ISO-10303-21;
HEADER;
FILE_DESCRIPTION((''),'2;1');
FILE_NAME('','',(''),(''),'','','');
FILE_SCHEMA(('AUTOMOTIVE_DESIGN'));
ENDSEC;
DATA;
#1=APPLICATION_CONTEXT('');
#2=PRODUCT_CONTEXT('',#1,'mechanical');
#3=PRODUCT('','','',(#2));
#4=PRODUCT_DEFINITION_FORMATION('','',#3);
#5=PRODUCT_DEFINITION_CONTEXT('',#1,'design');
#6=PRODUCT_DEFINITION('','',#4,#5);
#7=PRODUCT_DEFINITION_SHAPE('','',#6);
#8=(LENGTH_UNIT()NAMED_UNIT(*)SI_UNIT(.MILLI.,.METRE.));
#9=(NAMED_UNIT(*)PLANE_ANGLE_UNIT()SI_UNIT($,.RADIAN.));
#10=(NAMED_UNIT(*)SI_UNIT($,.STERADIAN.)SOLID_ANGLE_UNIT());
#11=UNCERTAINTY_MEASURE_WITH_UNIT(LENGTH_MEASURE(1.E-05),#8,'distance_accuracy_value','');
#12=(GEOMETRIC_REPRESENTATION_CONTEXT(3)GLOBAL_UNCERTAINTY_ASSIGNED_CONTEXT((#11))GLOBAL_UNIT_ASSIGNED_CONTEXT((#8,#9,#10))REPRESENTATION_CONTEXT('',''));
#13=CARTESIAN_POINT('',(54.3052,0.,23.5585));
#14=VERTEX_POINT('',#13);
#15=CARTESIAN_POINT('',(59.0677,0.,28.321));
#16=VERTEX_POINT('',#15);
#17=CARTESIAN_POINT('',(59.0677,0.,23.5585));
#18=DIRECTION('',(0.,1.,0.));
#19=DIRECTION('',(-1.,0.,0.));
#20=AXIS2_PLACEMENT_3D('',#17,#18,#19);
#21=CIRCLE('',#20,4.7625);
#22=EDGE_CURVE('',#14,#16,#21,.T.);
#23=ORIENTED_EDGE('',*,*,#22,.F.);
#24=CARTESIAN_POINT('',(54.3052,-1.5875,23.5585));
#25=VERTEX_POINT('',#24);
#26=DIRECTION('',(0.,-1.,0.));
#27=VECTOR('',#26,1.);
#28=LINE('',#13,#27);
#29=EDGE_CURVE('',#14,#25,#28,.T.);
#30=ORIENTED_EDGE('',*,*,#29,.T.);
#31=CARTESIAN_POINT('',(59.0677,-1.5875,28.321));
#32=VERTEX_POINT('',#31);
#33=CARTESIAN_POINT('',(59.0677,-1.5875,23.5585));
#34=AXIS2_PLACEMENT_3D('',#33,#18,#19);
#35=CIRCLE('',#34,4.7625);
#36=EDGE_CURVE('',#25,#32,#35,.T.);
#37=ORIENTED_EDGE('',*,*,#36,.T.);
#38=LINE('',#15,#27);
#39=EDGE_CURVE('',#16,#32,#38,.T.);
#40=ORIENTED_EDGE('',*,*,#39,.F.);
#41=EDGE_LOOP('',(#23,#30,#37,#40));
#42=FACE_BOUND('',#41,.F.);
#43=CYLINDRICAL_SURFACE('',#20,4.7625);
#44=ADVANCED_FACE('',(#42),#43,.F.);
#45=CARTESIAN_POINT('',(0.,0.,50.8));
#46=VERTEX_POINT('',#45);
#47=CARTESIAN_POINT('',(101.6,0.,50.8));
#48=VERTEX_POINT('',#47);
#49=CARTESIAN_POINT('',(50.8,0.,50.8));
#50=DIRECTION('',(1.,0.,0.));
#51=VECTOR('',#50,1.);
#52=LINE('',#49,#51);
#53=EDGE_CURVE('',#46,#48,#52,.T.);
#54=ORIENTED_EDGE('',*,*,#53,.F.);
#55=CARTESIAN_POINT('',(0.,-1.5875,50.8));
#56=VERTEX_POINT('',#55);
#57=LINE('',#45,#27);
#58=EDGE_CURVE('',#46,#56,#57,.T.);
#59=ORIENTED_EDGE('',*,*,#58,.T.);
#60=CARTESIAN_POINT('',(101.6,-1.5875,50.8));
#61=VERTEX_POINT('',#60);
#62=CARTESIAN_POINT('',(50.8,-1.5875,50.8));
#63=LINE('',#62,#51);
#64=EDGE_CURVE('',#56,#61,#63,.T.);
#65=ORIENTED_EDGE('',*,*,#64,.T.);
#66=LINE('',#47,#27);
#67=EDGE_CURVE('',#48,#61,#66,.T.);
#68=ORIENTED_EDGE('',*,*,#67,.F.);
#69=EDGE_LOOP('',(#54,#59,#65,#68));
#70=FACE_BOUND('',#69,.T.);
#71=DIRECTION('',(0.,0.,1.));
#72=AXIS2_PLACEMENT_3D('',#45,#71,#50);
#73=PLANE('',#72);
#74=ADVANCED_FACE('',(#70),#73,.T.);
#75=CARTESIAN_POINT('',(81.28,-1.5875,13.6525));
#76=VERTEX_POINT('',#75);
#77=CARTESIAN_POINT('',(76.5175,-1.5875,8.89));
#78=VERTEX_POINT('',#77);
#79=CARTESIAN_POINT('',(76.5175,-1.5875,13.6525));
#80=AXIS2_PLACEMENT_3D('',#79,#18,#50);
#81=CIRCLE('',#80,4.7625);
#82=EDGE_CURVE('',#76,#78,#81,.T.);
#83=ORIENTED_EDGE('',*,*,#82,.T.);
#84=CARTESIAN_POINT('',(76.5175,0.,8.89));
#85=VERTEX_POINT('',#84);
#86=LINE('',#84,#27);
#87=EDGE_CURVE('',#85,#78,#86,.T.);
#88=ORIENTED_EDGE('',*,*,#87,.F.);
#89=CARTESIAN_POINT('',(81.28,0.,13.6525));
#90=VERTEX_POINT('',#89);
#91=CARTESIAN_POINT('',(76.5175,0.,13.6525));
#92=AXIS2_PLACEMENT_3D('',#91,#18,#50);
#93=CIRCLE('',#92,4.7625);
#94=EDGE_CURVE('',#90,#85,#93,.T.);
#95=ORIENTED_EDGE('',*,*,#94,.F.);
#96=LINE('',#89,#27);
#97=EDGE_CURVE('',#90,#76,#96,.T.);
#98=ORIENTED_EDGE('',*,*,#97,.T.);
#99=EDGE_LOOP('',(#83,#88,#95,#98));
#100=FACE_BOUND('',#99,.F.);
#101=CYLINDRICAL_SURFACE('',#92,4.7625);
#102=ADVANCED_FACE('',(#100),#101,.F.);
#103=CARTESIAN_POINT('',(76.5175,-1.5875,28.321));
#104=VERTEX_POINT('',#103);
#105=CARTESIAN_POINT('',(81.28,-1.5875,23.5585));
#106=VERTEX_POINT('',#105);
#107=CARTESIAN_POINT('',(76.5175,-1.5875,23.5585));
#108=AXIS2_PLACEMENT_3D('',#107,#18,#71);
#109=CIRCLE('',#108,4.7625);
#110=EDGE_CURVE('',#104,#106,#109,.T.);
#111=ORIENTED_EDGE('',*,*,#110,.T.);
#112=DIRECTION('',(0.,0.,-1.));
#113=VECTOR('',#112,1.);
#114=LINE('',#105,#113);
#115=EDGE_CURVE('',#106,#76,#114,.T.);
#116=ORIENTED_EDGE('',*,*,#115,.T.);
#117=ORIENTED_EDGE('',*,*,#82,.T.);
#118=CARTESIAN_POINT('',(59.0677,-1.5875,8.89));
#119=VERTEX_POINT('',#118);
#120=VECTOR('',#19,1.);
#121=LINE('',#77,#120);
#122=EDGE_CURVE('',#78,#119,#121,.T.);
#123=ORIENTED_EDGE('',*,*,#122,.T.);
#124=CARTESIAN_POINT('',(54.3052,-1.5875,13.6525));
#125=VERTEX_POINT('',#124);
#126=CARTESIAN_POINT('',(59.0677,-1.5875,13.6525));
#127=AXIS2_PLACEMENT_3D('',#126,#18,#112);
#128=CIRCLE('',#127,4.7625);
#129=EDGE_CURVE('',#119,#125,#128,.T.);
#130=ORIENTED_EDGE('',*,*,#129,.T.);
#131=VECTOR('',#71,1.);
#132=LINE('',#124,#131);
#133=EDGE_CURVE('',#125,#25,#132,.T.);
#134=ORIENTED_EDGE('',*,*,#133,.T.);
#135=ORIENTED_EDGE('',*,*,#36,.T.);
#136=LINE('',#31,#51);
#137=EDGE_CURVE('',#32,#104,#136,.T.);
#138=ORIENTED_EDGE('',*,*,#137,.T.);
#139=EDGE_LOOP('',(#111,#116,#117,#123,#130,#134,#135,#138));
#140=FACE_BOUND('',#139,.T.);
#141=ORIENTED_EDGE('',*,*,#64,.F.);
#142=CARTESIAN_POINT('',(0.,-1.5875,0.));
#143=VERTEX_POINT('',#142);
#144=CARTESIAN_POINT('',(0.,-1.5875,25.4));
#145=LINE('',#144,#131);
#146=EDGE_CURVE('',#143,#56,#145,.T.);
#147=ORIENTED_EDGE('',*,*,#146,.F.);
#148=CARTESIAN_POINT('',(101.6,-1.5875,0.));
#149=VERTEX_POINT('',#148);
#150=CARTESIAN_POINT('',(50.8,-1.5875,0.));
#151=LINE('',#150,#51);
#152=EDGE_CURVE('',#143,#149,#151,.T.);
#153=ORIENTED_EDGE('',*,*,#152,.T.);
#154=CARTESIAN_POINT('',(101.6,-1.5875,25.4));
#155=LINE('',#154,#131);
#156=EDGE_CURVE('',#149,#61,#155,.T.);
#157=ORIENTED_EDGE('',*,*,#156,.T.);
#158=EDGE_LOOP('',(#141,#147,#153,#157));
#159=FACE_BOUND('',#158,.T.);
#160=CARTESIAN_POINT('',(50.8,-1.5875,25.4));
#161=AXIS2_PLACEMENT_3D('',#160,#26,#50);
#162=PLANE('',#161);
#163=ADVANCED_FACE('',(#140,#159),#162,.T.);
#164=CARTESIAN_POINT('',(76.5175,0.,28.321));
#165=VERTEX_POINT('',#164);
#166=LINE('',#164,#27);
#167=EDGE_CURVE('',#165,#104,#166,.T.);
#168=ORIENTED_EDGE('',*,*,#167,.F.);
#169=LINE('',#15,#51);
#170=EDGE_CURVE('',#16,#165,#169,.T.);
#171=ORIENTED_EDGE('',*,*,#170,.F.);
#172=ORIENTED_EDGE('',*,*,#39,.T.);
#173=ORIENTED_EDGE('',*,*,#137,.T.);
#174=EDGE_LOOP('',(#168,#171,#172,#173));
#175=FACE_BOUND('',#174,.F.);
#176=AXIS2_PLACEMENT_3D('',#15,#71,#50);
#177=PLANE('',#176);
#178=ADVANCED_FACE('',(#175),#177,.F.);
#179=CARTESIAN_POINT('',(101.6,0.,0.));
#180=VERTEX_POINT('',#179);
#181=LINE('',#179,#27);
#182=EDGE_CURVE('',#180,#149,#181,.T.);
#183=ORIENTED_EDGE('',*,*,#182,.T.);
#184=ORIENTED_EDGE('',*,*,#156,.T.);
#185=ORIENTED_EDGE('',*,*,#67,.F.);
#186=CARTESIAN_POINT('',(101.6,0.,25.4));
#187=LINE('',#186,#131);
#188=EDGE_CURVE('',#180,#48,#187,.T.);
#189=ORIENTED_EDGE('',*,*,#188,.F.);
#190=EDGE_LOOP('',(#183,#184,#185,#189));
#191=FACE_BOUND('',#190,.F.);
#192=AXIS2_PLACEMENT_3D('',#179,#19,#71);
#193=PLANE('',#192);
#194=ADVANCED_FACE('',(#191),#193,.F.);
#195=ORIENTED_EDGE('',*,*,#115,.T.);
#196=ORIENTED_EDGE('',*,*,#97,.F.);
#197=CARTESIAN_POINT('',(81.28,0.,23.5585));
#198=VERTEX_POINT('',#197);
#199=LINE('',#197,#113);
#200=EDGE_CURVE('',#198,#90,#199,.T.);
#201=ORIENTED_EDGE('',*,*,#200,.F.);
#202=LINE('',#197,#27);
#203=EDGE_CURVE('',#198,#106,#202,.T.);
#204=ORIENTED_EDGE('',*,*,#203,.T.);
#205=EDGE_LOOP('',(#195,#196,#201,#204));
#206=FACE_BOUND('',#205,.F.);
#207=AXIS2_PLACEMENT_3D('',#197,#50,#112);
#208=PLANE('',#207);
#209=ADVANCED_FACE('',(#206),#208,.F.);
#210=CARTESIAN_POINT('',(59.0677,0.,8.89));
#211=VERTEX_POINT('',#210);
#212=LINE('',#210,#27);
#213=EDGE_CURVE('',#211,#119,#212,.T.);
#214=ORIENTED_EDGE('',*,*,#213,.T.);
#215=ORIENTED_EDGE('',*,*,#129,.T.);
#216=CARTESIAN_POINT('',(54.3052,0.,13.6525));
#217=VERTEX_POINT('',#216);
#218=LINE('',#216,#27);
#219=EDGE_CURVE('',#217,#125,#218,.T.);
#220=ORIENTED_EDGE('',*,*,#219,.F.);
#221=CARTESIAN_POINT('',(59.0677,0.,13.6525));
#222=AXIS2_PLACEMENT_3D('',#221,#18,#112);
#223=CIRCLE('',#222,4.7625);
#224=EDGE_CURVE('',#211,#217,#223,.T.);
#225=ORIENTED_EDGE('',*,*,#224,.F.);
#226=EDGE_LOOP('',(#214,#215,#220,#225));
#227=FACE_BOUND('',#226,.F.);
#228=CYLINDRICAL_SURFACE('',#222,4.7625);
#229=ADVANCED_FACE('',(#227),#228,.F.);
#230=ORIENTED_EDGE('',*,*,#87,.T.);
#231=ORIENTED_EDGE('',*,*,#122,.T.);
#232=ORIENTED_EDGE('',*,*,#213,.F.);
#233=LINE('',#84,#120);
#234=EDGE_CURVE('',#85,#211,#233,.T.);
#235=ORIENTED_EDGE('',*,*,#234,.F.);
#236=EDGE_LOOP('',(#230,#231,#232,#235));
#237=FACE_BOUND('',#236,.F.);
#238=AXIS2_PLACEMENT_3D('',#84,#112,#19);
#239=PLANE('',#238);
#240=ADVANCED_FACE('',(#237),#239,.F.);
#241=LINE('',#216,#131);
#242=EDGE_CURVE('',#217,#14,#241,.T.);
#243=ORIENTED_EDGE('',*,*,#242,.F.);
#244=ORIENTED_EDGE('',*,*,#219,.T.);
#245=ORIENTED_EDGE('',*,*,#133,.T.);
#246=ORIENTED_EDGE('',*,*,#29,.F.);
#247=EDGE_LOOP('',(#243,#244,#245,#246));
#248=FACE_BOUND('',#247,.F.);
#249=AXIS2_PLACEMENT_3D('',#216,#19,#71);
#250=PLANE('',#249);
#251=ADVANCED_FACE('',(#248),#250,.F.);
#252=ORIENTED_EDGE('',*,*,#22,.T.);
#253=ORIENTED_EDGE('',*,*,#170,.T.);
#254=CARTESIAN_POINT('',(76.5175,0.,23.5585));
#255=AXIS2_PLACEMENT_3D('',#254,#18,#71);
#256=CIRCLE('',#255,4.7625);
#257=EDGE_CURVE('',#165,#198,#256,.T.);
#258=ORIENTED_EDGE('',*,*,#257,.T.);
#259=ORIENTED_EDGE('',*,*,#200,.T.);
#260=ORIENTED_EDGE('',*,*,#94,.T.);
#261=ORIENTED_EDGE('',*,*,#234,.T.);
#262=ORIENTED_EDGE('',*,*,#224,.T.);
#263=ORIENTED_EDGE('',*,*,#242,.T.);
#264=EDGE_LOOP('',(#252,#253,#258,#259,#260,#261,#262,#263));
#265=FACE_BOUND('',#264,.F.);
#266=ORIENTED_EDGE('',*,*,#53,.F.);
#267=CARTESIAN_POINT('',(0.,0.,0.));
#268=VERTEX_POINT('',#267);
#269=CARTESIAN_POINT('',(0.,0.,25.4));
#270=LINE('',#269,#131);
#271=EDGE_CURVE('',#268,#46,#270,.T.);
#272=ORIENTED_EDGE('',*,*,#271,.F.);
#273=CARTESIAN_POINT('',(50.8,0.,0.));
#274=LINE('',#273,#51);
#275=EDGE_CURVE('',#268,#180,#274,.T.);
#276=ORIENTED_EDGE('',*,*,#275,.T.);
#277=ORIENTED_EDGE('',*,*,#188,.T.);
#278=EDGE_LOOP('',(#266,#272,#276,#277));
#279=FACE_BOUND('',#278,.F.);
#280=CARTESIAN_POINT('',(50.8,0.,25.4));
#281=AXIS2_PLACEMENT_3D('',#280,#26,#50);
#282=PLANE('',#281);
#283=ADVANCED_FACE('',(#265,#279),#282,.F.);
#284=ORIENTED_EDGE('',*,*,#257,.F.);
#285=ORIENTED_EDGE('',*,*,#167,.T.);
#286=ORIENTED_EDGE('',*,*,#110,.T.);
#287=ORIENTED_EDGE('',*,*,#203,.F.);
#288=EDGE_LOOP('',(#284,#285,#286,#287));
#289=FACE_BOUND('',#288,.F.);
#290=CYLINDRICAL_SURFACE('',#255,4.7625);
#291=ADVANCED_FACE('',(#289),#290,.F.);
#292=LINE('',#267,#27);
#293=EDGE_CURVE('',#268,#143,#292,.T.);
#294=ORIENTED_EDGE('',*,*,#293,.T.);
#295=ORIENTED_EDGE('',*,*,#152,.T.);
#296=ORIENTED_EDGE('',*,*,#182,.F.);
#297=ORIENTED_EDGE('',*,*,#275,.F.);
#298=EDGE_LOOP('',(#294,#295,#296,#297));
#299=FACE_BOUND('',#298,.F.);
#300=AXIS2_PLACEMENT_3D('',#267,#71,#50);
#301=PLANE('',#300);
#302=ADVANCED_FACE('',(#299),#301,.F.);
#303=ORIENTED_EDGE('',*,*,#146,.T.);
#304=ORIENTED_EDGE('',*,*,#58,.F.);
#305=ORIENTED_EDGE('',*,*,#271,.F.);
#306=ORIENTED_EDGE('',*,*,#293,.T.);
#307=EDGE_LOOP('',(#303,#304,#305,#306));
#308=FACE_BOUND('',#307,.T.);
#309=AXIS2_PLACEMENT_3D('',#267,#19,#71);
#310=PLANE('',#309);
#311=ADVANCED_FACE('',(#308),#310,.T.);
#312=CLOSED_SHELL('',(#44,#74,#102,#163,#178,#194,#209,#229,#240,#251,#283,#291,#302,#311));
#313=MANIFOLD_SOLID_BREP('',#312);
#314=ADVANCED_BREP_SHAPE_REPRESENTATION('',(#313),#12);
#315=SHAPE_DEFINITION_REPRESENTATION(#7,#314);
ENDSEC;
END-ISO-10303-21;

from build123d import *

# Parameters (mm, degrees)
F0_W     = 101.6
F0_H     = 50.8
F1_DEPTH = 1.5875


# Not quite as in the source:
# - a length typed as a fraction of an inch, garbled in the dataset ("3 / 203.2 mm" for 3/8 in), is restored


with BuildPart() as f1:
    # F0 (on Front) → F1 (new body)
    with BuildSketch(Plane.XZ):
        with Locations((50.8, 25.4)):
            Rectangle(F0_W, F0_H)
        with BuildLine():
            ThreePointArc((81.28, 13.6525), (79.8850960454, 10.2849039546), (76.5175, 8.89))
            Line((76.5175, 8.89), (59.0677, 8.89))
            ThreePointArc((59.0677, 8.89), (55.7001039546, 10.2849039546), (54.3052, 13.6525))
            Line((54.3052, 13.6525), (54.3052, 23.5585))
            ThreePointArc((54.3052, 23.5585), (55.7001039546, 26.9260960454), (59.0677, 28.321))
            Line((59.0677, 28.321), (76.5175, 28.321))
            ThreePointArc((76.5175, 28.321), (79.8850960454, 26.9260960454), (81.28, 23.5585))
            Line((81.28, 23.5585), (81.28, 13.6525))
        make_face(mode=Mode.SUBTRACT)
    extrude(amount=F1_DEPTH)


solid = f1.part
